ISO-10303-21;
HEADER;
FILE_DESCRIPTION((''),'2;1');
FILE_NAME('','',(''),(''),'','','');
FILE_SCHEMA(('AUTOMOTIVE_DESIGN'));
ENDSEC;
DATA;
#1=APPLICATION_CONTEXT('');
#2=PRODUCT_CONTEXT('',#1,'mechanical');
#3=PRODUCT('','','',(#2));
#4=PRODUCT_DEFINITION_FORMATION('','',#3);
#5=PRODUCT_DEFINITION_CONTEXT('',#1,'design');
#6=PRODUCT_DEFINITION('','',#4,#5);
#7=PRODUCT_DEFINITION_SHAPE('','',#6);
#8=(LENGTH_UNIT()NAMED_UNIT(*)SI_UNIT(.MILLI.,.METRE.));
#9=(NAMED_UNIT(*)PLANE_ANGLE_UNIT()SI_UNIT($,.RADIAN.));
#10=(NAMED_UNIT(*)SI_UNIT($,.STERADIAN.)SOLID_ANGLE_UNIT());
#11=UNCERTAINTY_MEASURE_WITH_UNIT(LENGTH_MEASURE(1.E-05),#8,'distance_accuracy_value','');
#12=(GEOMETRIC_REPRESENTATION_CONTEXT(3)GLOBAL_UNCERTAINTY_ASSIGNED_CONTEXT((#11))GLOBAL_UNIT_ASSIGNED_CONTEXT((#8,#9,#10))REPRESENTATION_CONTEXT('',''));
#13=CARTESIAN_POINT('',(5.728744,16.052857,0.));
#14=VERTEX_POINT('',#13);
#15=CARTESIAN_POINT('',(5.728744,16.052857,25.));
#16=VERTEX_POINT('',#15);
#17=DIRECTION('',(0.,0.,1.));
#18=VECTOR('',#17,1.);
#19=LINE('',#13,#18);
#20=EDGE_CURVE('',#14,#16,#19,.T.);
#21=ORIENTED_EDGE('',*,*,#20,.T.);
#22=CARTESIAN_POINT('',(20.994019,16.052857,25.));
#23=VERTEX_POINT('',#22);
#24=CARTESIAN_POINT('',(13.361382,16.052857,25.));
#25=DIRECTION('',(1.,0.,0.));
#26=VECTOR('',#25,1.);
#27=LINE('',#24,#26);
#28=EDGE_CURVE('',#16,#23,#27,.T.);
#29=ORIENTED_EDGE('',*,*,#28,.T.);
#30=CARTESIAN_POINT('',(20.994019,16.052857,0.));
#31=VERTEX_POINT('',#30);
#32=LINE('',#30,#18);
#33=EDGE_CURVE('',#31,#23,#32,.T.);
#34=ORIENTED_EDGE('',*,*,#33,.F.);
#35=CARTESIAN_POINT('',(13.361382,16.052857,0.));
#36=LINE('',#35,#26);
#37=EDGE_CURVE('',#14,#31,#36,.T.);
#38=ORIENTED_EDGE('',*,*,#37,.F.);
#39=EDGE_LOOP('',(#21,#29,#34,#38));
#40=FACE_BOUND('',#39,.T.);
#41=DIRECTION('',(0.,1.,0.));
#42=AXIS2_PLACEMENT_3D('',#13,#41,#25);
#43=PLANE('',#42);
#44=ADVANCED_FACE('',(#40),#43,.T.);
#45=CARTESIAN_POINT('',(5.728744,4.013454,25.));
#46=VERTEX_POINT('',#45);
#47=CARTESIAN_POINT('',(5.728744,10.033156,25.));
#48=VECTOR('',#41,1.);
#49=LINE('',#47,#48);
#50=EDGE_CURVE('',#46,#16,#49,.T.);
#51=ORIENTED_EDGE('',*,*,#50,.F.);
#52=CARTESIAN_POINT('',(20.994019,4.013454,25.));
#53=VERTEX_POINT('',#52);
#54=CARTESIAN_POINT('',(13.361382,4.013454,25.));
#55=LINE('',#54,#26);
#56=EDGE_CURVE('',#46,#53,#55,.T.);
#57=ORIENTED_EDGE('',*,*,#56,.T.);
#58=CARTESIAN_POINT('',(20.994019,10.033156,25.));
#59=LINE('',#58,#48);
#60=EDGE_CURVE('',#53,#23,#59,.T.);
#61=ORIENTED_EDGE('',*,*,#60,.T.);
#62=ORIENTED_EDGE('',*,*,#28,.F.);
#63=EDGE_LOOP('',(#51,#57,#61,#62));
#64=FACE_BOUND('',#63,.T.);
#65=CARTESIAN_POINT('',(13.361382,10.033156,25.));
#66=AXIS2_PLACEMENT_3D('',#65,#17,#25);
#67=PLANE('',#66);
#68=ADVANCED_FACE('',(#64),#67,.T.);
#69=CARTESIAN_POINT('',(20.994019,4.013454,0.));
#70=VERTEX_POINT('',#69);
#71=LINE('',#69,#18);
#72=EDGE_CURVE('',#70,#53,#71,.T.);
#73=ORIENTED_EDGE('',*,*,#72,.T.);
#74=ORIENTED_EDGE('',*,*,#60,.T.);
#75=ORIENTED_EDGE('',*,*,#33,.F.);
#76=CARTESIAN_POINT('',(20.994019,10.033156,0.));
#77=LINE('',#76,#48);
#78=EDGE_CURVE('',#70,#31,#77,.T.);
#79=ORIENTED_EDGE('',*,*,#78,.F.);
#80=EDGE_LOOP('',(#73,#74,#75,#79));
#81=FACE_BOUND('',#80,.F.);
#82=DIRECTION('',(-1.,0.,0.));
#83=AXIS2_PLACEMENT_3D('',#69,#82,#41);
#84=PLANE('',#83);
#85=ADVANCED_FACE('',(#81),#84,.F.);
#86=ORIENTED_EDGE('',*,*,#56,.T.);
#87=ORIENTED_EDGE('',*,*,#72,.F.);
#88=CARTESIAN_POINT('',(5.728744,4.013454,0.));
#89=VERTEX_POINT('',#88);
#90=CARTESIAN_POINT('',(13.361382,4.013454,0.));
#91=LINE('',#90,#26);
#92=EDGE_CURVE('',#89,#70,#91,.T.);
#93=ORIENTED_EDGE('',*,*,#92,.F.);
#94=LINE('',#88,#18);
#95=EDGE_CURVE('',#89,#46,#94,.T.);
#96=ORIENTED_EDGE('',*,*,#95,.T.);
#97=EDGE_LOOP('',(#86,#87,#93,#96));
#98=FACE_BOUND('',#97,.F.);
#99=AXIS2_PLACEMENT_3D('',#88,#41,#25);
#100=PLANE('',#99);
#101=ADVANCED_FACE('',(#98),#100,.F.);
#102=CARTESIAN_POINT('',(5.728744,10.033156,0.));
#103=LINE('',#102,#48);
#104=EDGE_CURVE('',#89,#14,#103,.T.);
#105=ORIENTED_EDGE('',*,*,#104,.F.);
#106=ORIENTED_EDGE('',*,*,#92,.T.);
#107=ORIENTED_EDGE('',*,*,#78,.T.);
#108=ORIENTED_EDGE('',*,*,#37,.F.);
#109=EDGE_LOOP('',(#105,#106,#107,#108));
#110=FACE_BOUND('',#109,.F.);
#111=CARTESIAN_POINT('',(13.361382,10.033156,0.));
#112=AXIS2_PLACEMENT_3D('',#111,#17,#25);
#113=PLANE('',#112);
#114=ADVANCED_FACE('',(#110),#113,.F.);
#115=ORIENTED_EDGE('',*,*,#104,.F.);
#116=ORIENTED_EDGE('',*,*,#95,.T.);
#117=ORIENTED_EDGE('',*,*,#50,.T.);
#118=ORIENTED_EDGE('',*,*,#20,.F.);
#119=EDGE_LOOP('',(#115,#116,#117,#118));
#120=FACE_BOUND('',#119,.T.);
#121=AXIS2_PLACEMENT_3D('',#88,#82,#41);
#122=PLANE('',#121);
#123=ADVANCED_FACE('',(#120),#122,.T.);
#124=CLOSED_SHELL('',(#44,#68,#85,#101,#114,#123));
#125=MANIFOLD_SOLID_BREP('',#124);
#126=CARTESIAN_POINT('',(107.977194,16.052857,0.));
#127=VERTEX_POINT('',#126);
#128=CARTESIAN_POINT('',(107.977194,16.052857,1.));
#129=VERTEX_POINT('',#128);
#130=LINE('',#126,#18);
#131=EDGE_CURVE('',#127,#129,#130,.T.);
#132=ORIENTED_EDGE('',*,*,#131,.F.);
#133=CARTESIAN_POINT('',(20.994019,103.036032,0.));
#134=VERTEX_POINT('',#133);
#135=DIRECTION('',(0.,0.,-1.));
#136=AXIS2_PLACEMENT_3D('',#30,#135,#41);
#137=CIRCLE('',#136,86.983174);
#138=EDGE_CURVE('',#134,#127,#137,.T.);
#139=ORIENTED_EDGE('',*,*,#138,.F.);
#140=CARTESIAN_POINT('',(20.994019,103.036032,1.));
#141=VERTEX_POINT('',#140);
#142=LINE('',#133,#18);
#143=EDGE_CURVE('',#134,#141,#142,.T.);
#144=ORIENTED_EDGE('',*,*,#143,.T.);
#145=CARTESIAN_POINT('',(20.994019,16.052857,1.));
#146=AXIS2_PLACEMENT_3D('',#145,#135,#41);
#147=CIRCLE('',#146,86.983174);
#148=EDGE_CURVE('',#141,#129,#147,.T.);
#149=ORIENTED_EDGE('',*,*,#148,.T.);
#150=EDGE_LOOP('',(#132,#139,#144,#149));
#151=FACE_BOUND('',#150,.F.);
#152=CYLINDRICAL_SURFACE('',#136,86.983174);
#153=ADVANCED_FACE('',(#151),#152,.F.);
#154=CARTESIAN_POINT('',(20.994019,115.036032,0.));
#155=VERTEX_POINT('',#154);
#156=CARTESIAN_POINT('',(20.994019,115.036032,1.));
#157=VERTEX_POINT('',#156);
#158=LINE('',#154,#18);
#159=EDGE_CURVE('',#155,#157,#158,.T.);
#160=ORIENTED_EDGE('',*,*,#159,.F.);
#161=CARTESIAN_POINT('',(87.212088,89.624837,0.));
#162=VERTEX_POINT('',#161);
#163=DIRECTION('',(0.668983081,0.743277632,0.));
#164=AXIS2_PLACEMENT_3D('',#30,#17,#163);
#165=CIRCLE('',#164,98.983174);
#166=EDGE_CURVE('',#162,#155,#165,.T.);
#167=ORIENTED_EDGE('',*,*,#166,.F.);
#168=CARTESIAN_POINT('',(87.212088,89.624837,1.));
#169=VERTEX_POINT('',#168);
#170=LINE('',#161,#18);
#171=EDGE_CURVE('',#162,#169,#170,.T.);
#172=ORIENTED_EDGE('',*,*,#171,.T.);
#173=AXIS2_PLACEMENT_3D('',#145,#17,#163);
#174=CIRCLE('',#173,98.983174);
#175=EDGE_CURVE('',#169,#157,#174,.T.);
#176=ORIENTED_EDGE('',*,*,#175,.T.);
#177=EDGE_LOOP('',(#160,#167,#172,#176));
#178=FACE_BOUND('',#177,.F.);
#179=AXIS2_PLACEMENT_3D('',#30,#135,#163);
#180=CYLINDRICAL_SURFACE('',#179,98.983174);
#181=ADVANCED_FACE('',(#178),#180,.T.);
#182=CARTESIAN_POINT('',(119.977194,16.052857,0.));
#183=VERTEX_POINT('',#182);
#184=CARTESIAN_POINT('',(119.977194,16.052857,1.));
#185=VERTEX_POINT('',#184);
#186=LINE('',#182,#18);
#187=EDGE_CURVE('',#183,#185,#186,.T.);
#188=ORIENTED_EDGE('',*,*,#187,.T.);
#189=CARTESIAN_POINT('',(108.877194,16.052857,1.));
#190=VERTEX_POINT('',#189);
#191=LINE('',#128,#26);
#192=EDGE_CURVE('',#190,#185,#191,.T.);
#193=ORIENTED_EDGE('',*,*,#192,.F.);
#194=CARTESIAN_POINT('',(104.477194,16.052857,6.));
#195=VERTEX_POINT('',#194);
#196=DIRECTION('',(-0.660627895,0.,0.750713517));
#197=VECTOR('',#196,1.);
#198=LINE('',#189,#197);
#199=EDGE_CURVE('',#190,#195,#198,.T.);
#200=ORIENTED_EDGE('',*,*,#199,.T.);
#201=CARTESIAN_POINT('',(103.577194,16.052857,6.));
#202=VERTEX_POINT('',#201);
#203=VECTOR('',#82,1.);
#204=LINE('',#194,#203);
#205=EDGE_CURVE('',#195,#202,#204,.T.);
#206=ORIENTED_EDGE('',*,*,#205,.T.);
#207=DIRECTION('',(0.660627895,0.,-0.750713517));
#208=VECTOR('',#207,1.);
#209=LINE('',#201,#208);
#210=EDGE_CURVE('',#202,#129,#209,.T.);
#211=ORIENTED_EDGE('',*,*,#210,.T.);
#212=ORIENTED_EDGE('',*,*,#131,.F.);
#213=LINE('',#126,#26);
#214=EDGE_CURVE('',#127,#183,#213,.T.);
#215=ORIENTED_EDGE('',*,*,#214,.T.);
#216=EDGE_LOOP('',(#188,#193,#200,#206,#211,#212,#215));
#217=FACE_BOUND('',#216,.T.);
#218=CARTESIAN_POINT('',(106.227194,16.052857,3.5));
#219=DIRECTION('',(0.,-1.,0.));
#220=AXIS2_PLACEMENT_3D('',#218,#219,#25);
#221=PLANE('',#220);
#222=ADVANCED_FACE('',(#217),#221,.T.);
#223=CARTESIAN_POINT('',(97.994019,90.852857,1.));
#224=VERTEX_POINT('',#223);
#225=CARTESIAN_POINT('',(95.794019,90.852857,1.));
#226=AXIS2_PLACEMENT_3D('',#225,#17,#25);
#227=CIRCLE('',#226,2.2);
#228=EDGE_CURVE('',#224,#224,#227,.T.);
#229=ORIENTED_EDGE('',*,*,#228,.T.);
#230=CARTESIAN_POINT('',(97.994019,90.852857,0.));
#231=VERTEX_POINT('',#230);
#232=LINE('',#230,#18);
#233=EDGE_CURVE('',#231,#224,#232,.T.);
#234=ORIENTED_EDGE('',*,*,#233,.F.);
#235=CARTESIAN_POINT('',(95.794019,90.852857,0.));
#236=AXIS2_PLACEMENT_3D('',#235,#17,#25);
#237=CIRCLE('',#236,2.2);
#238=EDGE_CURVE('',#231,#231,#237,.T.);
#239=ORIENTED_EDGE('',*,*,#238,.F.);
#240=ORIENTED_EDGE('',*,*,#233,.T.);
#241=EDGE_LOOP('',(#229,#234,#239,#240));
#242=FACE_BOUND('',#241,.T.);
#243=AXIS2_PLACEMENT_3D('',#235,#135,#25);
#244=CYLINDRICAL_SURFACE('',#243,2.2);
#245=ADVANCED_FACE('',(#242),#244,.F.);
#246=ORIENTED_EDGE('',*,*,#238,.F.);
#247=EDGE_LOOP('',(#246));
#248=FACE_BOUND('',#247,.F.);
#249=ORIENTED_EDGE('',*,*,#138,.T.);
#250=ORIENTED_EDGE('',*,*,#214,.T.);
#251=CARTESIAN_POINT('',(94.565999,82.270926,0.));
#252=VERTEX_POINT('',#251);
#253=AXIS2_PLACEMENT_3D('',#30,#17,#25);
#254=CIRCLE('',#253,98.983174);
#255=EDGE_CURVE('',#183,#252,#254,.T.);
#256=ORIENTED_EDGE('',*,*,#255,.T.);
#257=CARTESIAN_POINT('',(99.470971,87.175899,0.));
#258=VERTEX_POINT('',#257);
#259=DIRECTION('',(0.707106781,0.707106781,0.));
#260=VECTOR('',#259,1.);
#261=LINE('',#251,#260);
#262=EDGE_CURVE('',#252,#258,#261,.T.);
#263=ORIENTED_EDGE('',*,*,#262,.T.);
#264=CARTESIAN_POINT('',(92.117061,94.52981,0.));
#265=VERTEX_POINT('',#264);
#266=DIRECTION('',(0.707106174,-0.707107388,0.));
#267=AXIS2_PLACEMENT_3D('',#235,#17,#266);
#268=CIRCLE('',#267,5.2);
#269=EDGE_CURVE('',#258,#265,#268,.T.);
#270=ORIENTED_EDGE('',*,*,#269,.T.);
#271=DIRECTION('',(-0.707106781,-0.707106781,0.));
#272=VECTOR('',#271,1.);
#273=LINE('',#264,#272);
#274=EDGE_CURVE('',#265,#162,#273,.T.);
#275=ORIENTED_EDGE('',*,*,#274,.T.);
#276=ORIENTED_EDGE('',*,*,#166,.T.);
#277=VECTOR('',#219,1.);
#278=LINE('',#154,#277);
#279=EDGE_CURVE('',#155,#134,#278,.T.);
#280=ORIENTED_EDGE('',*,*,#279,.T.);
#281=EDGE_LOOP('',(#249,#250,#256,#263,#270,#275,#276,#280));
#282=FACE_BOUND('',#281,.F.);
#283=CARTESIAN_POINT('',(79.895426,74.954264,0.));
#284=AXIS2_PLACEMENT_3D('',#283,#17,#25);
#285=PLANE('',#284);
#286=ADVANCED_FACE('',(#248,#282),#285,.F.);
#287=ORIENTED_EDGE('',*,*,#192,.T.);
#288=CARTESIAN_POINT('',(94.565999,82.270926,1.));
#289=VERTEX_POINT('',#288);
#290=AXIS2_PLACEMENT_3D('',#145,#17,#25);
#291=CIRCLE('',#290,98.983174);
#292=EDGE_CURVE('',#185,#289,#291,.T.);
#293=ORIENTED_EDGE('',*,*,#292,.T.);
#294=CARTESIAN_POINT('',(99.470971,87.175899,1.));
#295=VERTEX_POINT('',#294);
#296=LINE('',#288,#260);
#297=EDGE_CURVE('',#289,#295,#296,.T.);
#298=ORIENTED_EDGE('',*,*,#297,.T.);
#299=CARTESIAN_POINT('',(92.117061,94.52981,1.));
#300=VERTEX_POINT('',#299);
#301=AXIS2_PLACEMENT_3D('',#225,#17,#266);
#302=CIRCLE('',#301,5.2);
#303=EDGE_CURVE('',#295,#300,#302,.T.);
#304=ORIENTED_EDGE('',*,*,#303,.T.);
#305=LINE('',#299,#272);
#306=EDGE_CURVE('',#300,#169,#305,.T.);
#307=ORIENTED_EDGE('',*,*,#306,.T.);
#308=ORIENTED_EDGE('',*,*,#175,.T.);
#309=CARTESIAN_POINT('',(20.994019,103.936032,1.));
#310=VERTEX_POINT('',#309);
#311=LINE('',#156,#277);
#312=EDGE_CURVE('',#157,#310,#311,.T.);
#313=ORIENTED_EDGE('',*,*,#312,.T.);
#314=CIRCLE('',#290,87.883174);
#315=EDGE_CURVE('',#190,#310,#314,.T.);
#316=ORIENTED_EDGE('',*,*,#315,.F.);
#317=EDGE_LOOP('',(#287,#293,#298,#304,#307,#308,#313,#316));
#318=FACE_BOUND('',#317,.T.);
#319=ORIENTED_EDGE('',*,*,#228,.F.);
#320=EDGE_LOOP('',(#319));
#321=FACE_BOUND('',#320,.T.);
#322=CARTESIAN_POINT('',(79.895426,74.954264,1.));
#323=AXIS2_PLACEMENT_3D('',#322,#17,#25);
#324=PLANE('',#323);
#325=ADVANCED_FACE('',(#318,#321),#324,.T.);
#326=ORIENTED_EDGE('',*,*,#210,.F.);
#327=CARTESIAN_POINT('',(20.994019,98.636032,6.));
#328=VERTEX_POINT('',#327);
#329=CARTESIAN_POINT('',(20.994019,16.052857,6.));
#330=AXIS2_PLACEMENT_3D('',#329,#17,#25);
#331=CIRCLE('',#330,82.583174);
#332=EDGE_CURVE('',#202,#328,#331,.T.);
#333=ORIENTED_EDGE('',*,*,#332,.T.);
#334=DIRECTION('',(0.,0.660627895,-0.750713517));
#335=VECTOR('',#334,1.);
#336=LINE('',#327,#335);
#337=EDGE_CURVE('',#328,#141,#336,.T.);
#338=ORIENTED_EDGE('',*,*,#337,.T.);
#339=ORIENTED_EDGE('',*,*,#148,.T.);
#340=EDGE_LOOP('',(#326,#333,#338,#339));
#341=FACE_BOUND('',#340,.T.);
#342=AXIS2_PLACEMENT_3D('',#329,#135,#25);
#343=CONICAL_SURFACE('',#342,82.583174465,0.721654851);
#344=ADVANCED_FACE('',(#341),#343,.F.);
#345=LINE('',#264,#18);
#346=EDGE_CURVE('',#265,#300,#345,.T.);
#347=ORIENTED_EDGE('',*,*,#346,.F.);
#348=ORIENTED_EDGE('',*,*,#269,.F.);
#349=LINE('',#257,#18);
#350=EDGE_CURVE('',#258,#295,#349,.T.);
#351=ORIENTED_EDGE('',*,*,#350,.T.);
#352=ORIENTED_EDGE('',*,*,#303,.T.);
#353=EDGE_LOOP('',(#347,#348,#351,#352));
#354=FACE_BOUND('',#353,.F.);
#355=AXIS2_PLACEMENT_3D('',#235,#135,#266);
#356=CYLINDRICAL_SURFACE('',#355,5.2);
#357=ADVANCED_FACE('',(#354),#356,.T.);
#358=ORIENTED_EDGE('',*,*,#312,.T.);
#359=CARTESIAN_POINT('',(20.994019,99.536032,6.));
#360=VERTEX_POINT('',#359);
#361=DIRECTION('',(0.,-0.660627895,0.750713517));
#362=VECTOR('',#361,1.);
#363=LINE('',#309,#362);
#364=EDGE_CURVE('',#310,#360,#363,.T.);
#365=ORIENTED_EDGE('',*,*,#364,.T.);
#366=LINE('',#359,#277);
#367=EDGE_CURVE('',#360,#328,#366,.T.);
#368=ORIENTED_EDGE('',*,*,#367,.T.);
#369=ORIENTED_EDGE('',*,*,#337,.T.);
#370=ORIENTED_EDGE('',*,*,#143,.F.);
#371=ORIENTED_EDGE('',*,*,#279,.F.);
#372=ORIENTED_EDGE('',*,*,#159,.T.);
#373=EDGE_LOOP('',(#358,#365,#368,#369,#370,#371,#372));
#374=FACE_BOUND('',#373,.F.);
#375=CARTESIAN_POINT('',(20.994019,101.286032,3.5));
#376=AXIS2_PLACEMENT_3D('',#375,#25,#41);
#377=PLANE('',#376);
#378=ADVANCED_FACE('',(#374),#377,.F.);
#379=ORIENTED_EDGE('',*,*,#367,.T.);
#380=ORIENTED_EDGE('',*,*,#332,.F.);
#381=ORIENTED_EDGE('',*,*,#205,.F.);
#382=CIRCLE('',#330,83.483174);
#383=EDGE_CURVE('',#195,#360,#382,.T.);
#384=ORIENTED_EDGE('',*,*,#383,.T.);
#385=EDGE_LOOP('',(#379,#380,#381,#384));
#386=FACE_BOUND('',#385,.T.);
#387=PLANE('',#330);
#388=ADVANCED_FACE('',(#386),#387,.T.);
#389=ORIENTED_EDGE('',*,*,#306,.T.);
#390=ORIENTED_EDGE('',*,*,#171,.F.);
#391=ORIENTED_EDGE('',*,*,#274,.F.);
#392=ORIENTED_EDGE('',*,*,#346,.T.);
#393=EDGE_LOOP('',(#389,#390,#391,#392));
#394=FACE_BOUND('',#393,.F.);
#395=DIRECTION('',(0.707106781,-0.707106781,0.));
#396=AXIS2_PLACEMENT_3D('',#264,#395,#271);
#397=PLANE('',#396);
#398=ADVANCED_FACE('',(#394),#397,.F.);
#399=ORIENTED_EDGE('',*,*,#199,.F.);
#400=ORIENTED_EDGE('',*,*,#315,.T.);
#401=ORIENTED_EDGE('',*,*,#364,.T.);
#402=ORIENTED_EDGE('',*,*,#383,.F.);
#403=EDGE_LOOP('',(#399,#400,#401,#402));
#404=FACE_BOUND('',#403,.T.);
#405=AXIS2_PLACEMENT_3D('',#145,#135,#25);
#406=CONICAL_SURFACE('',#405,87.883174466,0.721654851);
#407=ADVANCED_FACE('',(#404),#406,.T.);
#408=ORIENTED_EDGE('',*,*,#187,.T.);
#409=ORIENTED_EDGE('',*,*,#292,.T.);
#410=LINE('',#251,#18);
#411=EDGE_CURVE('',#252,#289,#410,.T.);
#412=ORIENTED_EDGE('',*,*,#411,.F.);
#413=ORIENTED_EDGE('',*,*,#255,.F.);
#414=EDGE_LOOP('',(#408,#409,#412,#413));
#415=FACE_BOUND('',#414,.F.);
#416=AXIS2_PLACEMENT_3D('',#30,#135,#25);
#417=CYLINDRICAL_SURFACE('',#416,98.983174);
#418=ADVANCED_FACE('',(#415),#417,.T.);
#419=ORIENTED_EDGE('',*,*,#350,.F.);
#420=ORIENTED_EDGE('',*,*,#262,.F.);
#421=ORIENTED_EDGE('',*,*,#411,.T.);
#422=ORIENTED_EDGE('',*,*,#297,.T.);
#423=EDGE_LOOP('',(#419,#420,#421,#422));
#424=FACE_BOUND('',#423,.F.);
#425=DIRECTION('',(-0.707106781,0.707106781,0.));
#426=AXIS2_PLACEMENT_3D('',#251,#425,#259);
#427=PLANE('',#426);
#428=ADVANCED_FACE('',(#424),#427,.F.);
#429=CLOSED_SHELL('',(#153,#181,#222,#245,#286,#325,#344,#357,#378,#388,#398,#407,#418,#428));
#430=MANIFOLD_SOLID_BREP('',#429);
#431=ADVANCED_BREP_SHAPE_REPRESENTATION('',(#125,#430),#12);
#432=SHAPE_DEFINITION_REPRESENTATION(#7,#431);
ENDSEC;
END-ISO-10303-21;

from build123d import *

# Parameters (mm, degrees)
F0_R     = 2.2
F1_DEPTH = 1
F0_W     = 15.2652747326
F0_H     = 12.0394033708
F3_DEPTH = 25
F4_ANGLE = 90


# Not quite as in the source:
# - a feature names something its author has since deleted; it is built from what else it names


with BuildPart() as f1:
    # F0 (on Top) → F1 (new body)
    with BuildSketch(Plane.XY):
        with BuildLine():
            Line((94.5659986717, 82.2709264254), (99.4709712732, 87.1758990269))
            ThreePointArc((99.4709712732, 87.1758990269), (99.4709744308, 94.5298127088), (92.1170607489, 94.5298095512))
            Line((92.1170607489, 94.5298095512), (87.2120881473, 89.6248369497))
            ThreePointArc((87.2120881473, 89.6248369497), (56.4572447999, 108.4651318213), (20.9940191686, 115.0360319122))
            Line((20.9940191686, 115.0360319122), (20.9940191686, 103.0360319122))
            ThreePointArc((20.9940191686, 103.0360319122), (82.5004116823, 77.5592499604), (107.9771936341, 16.0528574467))
            Line((107.9771936341, 16.0528574467), (119.9771936341, 16.0528574467))
            ThreePointArc((119.9771936341, 16.0528574467), (113.4062935433, 51.5160830779), (94.5659986717, 82.2709264254))
        make_face()
        with Locations((95.7940191686, 90.8528574467)):
            Circle(F0_R, mode=Mode.SUBTRACT)
    extrude(amount=F1_DEPTH)

    # F2 (on face) → F4 (revolve)
    with BuildSketch(Plane.XZ.offset(-16.0528574467)):
        Polygon((108.8771936341, 1), (104.4771936341, 6), (103.5771936341, 6), (107.9771936341, 1), align=None)
    revolve(axis=Axis((20.9940191686, 16.0528574467, 12.5), (0, 0, 1)), revolution_arc=F4_ANGLE)


with BuildPart() as f3:
    # F0 (on Top) → F3 (new body)
    with BuildSketch(Plane.XY):
        with Locations((13.3613818023, 10.0331557613)):
            Rectangle(F0_W, F0_H)
    extrude(amount=F3_DEPTH)


solid = Compound([f1.part, f3.part])
